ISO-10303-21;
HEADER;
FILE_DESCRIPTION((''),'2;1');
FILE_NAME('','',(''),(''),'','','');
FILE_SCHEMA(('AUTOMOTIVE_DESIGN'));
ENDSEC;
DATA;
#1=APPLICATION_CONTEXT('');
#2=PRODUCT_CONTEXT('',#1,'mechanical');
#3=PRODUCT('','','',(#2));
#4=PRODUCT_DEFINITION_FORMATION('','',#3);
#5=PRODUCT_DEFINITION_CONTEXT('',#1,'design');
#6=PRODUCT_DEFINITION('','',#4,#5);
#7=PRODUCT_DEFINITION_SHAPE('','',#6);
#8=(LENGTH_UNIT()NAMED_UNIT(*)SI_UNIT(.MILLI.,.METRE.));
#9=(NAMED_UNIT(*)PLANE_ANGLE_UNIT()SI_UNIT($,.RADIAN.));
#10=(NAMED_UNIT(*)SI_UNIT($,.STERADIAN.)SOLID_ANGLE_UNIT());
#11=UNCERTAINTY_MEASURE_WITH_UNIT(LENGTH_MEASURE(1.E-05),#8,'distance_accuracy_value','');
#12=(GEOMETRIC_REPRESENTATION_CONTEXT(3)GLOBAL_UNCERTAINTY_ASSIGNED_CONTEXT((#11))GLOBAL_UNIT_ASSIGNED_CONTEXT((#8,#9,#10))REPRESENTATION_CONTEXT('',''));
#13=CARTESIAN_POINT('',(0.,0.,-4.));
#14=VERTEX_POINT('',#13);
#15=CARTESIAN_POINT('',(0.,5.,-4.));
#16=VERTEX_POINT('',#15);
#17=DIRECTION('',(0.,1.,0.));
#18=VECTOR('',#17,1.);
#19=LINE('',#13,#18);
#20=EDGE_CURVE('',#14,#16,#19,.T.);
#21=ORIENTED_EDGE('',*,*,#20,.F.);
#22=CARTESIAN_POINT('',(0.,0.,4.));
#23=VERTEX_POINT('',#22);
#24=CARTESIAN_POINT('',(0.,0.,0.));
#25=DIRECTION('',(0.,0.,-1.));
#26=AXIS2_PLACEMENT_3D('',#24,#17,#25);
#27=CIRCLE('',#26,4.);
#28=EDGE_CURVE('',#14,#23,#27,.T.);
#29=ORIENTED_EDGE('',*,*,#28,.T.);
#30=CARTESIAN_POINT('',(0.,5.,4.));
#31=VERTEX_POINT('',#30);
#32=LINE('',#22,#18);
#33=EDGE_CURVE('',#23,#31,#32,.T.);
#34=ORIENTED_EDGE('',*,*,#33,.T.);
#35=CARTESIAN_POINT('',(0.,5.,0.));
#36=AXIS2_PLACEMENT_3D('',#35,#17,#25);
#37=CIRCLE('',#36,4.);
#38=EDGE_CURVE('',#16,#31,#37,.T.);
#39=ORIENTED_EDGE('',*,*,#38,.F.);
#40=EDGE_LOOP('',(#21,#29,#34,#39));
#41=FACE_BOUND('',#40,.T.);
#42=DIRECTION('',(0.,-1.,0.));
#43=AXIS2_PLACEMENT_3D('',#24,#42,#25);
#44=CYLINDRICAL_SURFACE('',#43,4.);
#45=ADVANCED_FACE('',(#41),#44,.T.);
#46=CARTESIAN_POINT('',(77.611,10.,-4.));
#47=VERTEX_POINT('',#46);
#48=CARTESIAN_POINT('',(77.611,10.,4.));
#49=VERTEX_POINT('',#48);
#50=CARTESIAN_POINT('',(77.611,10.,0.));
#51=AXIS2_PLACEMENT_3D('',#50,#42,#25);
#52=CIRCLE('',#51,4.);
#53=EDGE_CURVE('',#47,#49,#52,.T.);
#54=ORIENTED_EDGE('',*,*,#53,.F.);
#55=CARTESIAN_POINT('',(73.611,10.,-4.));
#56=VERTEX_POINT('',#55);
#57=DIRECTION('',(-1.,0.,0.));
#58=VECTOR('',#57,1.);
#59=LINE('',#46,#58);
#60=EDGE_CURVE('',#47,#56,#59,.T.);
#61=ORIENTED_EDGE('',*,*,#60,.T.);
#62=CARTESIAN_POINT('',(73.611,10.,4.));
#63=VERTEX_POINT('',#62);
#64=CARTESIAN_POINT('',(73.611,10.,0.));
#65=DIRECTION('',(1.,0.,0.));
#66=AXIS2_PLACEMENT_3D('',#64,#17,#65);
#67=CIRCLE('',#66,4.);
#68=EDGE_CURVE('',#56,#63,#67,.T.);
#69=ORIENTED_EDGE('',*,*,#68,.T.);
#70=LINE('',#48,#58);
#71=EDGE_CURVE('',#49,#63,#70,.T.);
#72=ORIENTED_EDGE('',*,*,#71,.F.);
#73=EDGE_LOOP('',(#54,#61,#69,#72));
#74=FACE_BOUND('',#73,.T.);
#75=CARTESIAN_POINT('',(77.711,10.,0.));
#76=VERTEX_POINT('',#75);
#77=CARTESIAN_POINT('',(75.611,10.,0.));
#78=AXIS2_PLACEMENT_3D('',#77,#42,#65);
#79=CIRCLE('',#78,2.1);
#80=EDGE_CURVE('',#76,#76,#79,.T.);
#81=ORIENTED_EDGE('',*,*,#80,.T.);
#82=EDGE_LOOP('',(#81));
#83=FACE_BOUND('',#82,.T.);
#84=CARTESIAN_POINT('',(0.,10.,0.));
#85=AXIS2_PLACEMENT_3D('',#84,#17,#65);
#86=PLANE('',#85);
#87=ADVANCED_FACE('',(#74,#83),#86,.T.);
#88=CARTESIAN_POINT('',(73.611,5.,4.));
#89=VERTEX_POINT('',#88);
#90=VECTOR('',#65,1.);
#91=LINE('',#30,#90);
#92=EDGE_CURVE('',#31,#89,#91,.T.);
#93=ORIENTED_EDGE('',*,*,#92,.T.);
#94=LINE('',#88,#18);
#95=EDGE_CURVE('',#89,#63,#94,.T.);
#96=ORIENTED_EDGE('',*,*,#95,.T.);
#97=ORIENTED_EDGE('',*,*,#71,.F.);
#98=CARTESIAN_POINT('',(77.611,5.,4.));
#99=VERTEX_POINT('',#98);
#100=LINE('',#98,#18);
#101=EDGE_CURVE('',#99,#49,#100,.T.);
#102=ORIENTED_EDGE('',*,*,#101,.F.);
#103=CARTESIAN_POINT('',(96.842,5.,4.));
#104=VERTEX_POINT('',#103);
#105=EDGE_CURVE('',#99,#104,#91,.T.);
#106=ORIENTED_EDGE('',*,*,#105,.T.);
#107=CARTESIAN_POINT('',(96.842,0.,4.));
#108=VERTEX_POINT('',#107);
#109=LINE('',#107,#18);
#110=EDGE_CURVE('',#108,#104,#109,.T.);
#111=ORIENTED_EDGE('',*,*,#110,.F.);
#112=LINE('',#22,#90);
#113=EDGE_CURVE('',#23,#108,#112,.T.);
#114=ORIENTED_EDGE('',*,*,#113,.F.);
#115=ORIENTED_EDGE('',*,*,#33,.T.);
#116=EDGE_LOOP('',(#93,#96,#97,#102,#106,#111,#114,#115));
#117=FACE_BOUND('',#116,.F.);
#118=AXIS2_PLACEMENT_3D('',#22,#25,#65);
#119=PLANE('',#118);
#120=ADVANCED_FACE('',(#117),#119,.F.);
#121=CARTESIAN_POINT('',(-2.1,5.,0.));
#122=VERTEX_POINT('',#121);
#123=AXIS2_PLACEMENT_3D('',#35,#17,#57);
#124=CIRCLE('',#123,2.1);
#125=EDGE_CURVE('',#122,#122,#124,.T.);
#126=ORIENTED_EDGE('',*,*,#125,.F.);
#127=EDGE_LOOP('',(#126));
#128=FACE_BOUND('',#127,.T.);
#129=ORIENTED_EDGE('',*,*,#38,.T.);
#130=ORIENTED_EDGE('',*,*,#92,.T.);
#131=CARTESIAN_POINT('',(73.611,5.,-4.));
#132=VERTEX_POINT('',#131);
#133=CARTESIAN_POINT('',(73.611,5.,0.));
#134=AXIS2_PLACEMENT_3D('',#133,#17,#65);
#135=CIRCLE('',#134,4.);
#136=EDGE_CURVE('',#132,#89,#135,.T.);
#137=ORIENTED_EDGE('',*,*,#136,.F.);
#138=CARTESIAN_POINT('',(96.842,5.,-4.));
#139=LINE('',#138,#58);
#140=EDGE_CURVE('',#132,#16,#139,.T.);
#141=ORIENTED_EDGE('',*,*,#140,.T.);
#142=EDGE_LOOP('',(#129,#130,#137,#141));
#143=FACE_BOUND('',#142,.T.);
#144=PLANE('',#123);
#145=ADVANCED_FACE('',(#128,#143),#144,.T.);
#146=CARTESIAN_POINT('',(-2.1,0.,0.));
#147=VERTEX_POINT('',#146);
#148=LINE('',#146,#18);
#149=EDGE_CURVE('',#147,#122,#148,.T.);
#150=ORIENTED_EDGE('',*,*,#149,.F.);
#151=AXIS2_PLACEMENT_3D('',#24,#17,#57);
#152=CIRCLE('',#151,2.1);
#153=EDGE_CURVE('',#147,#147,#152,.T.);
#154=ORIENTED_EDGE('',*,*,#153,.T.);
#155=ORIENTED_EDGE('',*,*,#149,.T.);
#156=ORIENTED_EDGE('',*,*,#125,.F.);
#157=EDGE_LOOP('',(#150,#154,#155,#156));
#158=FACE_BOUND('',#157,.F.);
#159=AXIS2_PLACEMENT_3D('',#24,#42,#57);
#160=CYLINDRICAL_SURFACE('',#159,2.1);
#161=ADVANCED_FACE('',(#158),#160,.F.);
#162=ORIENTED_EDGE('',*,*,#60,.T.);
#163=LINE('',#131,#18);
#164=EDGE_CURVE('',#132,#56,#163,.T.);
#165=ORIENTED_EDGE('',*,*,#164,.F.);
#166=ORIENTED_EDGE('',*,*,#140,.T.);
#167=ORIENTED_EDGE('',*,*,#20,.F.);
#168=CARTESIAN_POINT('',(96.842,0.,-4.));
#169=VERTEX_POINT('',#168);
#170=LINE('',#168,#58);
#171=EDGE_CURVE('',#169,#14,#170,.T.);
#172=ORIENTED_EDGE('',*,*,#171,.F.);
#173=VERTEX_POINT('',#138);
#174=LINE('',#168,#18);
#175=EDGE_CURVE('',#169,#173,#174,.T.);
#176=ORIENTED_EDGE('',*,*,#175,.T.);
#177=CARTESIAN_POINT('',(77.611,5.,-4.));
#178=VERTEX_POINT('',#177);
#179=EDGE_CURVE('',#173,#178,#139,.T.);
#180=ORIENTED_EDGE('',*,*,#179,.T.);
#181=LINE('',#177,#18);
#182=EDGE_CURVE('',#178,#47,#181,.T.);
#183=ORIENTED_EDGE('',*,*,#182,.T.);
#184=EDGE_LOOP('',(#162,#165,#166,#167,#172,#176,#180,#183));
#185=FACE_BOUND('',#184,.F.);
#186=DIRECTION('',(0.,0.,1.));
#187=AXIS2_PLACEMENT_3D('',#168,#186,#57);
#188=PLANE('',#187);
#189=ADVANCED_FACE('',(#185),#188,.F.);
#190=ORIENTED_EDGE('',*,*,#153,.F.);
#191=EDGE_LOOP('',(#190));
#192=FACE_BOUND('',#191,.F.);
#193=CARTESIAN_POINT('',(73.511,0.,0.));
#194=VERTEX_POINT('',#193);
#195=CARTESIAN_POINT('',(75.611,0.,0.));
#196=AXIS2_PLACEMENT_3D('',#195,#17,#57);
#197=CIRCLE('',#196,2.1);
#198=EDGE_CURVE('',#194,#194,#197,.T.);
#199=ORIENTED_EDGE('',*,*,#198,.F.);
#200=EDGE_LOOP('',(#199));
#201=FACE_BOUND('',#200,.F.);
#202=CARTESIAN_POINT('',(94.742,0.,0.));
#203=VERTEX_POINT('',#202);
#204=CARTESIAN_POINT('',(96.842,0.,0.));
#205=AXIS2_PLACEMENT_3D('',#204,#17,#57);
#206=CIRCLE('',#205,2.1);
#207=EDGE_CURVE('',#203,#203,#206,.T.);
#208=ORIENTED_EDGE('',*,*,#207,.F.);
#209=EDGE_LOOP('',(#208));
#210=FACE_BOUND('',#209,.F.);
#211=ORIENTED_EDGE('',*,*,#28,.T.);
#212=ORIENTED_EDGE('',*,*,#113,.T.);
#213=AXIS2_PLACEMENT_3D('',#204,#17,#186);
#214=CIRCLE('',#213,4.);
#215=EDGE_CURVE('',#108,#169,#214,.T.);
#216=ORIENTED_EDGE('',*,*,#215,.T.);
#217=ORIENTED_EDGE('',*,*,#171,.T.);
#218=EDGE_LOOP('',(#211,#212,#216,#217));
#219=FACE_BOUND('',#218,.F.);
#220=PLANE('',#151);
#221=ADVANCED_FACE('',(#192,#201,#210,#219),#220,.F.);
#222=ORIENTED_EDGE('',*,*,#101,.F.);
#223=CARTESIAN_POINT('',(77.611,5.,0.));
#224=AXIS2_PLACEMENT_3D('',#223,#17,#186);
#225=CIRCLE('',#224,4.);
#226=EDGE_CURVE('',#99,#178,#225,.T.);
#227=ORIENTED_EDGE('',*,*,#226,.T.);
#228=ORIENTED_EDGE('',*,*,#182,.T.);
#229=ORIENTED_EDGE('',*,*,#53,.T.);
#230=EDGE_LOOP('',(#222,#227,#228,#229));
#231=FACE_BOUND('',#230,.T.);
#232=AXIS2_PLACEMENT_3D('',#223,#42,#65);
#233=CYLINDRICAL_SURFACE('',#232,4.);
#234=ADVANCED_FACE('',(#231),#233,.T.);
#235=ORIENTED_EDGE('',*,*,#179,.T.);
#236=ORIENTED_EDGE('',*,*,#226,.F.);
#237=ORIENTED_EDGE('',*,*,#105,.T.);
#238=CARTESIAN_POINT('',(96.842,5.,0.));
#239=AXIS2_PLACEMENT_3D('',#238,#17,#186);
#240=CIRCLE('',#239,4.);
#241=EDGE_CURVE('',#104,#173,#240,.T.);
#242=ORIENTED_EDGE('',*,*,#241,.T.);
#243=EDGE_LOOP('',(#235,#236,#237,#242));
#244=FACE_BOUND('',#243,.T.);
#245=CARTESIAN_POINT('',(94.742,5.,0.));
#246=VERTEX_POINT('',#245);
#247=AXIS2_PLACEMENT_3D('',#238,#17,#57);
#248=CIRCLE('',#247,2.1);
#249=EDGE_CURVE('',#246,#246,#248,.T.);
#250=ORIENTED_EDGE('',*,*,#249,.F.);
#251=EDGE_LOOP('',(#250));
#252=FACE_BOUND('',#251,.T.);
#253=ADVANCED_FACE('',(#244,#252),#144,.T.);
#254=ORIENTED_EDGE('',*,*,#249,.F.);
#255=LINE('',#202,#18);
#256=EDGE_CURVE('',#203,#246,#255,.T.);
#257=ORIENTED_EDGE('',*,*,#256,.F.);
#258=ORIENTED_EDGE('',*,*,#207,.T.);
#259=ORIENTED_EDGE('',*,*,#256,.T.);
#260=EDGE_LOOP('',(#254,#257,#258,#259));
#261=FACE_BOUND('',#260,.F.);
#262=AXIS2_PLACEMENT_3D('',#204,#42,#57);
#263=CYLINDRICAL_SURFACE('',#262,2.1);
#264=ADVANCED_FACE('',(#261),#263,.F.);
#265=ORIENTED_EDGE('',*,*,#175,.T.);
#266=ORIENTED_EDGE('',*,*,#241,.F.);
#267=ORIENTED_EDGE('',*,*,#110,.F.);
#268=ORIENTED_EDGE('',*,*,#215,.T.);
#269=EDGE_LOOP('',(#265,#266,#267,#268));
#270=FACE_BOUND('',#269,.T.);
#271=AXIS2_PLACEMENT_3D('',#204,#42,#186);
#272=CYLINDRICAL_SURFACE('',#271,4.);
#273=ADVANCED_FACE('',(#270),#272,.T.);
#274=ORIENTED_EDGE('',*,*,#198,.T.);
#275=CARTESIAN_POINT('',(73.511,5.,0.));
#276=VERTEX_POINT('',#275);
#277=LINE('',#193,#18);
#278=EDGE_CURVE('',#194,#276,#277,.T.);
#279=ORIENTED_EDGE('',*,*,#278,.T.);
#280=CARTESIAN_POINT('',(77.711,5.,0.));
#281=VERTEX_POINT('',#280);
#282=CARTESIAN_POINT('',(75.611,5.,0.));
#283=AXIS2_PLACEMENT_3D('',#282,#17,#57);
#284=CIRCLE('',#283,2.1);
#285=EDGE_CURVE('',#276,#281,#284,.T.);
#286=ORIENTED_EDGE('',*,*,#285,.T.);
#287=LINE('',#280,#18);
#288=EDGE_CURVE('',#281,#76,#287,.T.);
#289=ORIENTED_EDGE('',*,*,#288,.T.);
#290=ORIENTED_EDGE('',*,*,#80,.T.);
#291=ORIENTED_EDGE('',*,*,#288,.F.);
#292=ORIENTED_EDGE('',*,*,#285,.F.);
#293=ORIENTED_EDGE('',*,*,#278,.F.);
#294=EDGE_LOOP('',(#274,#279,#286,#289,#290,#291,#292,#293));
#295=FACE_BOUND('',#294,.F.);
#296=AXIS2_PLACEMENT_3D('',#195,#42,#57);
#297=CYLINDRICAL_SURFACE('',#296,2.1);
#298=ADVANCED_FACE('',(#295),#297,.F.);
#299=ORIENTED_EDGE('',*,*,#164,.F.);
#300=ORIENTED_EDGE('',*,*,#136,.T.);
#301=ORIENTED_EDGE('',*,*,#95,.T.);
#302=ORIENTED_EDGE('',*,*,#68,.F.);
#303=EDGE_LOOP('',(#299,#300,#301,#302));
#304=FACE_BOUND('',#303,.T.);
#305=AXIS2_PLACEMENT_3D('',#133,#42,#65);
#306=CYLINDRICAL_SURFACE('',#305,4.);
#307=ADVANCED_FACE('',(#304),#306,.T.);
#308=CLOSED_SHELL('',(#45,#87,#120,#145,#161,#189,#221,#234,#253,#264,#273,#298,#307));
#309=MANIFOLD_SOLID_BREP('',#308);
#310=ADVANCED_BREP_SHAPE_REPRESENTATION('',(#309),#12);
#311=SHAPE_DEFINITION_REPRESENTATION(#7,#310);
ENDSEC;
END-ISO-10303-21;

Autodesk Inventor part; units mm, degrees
ref_plane "YZ Plane" through (0, 0, 0) normal (1, 0, 0) x (0, 1, 0)
ref_plane "XZ Plane" through (0, 0, 0) normal (0, 1, 0) x (-1, 0, 0)
ref_plane "XY Plane" through (0, 0, 0) normal (0, 0, 1) x (1, 0, 0)
sketch "Sketch1" plane through (0, 0, 0) normal (0, 1, 0) x (-1, 0, 0)
  line L0 (0, 0) -> (-96.842, 0) construction
  line L1 (0, 4) -> (-96.842, 4)
  line L2 (-96.842, -4) -> (0, -4)
  arc A0 (0, -4) -> (0, 4) centre (0, 0) ccw
  arc A1 (-96.842, 4) -> (-96.842, -4) centre (-96.842, 0) ccw
  circle A2 centre (0, 0) radius 2.1
  circle A3 centre (-96.842, 0) radius 2.1
  circle A4 centre (-75.611, 0) radius 2.1
  point P0 (-48.421, 0)
  dimension "d0" = 96.842
  dimension "d1" = 8
  dimension "d2" = 4.2
  dimension "d10" = 4.2
  dimension "d28" = 4.2
  dimension "d29" = 75.611
extrude "Extrusion1" add sketch "Sketch1" along normal blind 5
sketch "Sketch4" plane through (0, 5, 0) normal (0, 1, 0) x (1, 0, 0)
  arc A0 (96.842, -4) -> (96.842, 4) centre (96.842, 0) ccw projected
  line L0 (96.842, 4) -> (0, 4) projected
  arc A1 (0, 4) -> (0, -4) centre (0, 0) ccw projected
  line L1 (0, -4) -> (96.842, -4) projected
  circle A2 centre (75.611, 0) radius 2.1 projected
  circle A3 centre (96.842, 0) radius 2.1 projected
  circle A4 centre (0, 0) radius 2.1 projected
  circle A5 centre (75.611, 0) radius 4
  circle A6 centre (73.611, 0) radius 4
  circle A7 centre (77.611, 0) radius 4
  point P0 (73.611, 4)
  point P1 (73.611, -4)
  point P2 (77.611, -4)
  point P3 (77.611, 4)
  dimension "d30" = 8
  dimension "d31" = 8
  dimension "d32" = 8
  dimension "d33" = 2
  dimension "d34" = 2
extrude "Extrusion7" add sketch "Sketch4" along normal blind 5 contours L1 A5 A7 | A7 A5 | A7 A5 L0 | L1 A6 A5 | A5 A6 A7 | A7 A6 A2 A5 | A5 A6 L0 | A5 A7 A6 | A6 A5 | A5 A6 A7 A2 | A7 A2 A6 | A6 A2 A7 picked at (75.3898, -2.8494) picked at (75.3898, 2.8494)
